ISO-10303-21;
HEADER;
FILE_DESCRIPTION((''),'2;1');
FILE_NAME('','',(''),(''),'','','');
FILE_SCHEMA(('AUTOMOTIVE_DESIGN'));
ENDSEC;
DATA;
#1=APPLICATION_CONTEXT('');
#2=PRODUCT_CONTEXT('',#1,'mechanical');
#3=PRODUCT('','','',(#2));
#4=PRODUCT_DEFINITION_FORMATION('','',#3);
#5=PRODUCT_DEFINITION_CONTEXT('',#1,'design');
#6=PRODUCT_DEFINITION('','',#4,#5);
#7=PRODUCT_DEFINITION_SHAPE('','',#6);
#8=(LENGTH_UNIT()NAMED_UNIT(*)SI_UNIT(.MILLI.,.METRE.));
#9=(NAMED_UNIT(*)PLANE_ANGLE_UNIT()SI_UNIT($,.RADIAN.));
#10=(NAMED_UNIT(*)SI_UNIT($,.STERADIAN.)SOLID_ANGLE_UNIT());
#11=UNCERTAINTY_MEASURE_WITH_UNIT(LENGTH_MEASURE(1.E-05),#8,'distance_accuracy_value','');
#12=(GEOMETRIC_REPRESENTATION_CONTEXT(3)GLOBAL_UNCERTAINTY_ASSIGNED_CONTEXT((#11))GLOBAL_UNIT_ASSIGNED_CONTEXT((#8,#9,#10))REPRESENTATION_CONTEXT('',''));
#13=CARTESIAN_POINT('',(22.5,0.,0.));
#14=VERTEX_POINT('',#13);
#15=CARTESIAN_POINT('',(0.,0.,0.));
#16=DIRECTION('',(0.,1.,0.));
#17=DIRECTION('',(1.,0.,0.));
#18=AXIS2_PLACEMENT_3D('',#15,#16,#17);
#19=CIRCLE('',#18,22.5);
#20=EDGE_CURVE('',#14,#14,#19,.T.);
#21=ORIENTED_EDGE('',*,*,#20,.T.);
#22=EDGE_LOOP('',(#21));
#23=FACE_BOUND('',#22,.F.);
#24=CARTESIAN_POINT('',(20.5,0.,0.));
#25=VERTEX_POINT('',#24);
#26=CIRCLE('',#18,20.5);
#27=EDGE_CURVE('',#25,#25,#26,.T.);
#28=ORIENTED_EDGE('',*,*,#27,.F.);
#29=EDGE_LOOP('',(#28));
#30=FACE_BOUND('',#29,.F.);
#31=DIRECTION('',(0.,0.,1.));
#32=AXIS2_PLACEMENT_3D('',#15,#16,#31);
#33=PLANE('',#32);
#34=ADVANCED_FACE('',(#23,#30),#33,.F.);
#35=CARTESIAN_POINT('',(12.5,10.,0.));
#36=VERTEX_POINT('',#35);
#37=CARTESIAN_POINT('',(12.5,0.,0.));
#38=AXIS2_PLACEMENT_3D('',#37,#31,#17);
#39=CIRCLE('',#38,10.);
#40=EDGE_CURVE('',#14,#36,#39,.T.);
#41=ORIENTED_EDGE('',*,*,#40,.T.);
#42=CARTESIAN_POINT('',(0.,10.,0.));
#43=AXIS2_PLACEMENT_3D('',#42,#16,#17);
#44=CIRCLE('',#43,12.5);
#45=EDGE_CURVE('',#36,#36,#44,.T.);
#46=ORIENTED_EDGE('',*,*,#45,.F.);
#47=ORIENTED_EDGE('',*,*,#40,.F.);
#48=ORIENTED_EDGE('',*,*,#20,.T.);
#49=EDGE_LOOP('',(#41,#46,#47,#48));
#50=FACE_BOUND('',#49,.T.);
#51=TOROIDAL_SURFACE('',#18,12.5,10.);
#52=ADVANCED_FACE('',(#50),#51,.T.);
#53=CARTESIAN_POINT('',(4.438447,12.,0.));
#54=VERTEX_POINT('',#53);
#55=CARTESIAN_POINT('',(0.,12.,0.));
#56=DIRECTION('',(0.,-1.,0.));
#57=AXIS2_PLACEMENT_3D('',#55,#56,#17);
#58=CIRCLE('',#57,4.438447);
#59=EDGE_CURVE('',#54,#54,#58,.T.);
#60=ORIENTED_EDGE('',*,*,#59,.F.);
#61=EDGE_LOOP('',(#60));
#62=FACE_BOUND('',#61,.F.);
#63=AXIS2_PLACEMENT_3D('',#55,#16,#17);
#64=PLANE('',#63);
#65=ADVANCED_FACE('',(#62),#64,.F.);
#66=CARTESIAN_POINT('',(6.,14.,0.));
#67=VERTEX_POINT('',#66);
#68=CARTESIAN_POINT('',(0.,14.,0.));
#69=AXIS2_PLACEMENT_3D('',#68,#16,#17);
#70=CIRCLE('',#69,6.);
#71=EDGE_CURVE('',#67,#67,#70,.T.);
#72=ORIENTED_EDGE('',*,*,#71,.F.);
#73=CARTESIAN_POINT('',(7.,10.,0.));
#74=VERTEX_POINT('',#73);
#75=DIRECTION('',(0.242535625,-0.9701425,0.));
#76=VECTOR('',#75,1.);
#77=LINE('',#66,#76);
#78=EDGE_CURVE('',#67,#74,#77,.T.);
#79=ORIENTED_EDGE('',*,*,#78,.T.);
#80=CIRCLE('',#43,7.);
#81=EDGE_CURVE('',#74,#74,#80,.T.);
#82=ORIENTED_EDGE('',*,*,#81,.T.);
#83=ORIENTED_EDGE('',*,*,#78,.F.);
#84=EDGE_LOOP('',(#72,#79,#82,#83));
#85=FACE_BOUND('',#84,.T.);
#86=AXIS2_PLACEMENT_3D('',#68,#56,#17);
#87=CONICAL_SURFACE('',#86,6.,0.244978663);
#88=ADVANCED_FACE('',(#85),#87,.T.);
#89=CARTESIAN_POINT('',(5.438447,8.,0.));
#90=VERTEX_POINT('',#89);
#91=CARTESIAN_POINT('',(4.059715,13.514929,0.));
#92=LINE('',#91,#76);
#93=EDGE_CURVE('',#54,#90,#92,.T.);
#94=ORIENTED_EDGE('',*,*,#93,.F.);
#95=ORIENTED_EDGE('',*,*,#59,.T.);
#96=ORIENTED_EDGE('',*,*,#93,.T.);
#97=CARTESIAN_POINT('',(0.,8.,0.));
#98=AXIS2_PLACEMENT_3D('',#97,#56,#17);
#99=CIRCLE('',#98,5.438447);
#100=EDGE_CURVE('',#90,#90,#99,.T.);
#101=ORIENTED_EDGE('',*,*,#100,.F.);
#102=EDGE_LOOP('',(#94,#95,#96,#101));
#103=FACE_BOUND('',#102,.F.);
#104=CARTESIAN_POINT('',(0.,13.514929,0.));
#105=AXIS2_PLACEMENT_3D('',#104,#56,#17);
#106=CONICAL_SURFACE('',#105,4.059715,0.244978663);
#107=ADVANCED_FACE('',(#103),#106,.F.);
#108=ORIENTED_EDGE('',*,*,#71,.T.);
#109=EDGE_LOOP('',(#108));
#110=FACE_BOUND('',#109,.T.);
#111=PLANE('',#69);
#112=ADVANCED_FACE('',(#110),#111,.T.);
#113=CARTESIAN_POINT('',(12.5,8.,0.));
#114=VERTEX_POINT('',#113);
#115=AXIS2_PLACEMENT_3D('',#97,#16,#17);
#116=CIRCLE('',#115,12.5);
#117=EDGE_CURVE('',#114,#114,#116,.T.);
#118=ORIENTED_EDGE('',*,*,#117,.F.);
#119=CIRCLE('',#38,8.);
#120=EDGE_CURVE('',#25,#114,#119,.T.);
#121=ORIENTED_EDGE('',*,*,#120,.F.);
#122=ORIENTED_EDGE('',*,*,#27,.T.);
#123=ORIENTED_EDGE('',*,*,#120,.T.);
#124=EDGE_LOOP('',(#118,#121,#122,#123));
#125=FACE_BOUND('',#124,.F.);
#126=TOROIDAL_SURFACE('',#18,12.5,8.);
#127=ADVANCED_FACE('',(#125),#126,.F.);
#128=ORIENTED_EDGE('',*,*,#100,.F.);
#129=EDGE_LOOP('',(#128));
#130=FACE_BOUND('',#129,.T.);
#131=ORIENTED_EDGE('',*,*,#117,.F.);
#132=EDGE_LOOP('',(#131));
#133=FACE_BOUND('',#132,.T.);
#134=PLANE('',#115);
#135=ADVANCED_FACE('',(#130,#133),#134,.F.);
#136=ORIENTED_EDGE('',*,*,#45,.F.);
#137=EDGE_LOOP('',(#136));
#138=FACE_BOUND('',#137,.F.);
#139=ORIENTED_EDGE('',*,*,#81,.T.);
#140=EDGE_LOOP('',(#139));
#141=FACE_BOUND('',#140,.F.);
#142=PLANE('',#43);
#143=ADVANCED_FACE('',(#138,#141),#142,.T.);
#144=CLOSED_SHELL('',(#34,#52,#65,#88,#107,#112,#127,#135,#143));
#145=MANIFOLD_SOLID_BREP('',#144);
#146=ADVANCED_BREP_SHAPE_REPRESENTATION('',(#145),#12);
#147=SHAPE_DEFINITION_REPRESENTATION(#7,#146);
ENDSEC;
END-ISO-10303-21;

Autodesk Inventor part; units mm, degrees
ref_plane "YZ Plane" through (0, 0, 0) normal (1, 0, 0) x (0, 1, 0)
ref_plane "XZ Plane" through (0, 0, 0) normal (0, 1, 0) x (-1, 0, 0)
ref_plane "XY Plane" through (0, 0, 0) normal (0, 0, 1) x (1, 0, 0)
sketch "Sketch1" plane through (0, 0, 0) normal (0, 0, 1) x (1, 0, 0)
  line L0 (0, 0) -> (22.5, 0) construction
  line L1 (0, 0) -> (0, 10) construction
  line L2 (0, 10) -> (7, 10) construction
  line L3 (7, 10) -> (0, 10) construction
  line L4 (0, 10) -> (0, 14) construction
  line L5 (0, 14) -> (6, 14) construction
  line L6 (0, 10) -> (12.5, 10) construction
  line L7 (6, 14) -> (7, 10)
  line L8 (7, 10) -> (12.5, 10)
  line L9 (12.5, 10) -> (12.5, 10)
  line L10 (22.5, 0) -> (22.5, 0)
  arc A0 (22.5, 0) -> (12.5, 10) centre (12.5, 0) ccw
  line L11 (6, 14) -> (0, 14)
  point P0 (22.5, 10)
  dimension "d0" = 22.5
  dimension "d1" = 10
  dimension "d2" = 7
  dimension "d3" = 4
  dimension "d4" = 6
  dimension "d5" = 12.5
  dimension "d6" = 10
surface revolve "RevolutionSrf1" sketch "Sketch1" angle 360 about axis through (0, 0, 0) along (0, 1, 0) shown no curves L10 A0 L9 L8 L7 L11
thicken "Thicken1" operation new thickness 2 both sides no extend neighbours no toward (0, -1, 0) faces at (-0.7092, 14, -1.4219) (6.4729, 11.3333, 1.5954) (10.5456, 10, 0.9971) (22.181, 0.7473, 3.6048)
properties part number "cup"
